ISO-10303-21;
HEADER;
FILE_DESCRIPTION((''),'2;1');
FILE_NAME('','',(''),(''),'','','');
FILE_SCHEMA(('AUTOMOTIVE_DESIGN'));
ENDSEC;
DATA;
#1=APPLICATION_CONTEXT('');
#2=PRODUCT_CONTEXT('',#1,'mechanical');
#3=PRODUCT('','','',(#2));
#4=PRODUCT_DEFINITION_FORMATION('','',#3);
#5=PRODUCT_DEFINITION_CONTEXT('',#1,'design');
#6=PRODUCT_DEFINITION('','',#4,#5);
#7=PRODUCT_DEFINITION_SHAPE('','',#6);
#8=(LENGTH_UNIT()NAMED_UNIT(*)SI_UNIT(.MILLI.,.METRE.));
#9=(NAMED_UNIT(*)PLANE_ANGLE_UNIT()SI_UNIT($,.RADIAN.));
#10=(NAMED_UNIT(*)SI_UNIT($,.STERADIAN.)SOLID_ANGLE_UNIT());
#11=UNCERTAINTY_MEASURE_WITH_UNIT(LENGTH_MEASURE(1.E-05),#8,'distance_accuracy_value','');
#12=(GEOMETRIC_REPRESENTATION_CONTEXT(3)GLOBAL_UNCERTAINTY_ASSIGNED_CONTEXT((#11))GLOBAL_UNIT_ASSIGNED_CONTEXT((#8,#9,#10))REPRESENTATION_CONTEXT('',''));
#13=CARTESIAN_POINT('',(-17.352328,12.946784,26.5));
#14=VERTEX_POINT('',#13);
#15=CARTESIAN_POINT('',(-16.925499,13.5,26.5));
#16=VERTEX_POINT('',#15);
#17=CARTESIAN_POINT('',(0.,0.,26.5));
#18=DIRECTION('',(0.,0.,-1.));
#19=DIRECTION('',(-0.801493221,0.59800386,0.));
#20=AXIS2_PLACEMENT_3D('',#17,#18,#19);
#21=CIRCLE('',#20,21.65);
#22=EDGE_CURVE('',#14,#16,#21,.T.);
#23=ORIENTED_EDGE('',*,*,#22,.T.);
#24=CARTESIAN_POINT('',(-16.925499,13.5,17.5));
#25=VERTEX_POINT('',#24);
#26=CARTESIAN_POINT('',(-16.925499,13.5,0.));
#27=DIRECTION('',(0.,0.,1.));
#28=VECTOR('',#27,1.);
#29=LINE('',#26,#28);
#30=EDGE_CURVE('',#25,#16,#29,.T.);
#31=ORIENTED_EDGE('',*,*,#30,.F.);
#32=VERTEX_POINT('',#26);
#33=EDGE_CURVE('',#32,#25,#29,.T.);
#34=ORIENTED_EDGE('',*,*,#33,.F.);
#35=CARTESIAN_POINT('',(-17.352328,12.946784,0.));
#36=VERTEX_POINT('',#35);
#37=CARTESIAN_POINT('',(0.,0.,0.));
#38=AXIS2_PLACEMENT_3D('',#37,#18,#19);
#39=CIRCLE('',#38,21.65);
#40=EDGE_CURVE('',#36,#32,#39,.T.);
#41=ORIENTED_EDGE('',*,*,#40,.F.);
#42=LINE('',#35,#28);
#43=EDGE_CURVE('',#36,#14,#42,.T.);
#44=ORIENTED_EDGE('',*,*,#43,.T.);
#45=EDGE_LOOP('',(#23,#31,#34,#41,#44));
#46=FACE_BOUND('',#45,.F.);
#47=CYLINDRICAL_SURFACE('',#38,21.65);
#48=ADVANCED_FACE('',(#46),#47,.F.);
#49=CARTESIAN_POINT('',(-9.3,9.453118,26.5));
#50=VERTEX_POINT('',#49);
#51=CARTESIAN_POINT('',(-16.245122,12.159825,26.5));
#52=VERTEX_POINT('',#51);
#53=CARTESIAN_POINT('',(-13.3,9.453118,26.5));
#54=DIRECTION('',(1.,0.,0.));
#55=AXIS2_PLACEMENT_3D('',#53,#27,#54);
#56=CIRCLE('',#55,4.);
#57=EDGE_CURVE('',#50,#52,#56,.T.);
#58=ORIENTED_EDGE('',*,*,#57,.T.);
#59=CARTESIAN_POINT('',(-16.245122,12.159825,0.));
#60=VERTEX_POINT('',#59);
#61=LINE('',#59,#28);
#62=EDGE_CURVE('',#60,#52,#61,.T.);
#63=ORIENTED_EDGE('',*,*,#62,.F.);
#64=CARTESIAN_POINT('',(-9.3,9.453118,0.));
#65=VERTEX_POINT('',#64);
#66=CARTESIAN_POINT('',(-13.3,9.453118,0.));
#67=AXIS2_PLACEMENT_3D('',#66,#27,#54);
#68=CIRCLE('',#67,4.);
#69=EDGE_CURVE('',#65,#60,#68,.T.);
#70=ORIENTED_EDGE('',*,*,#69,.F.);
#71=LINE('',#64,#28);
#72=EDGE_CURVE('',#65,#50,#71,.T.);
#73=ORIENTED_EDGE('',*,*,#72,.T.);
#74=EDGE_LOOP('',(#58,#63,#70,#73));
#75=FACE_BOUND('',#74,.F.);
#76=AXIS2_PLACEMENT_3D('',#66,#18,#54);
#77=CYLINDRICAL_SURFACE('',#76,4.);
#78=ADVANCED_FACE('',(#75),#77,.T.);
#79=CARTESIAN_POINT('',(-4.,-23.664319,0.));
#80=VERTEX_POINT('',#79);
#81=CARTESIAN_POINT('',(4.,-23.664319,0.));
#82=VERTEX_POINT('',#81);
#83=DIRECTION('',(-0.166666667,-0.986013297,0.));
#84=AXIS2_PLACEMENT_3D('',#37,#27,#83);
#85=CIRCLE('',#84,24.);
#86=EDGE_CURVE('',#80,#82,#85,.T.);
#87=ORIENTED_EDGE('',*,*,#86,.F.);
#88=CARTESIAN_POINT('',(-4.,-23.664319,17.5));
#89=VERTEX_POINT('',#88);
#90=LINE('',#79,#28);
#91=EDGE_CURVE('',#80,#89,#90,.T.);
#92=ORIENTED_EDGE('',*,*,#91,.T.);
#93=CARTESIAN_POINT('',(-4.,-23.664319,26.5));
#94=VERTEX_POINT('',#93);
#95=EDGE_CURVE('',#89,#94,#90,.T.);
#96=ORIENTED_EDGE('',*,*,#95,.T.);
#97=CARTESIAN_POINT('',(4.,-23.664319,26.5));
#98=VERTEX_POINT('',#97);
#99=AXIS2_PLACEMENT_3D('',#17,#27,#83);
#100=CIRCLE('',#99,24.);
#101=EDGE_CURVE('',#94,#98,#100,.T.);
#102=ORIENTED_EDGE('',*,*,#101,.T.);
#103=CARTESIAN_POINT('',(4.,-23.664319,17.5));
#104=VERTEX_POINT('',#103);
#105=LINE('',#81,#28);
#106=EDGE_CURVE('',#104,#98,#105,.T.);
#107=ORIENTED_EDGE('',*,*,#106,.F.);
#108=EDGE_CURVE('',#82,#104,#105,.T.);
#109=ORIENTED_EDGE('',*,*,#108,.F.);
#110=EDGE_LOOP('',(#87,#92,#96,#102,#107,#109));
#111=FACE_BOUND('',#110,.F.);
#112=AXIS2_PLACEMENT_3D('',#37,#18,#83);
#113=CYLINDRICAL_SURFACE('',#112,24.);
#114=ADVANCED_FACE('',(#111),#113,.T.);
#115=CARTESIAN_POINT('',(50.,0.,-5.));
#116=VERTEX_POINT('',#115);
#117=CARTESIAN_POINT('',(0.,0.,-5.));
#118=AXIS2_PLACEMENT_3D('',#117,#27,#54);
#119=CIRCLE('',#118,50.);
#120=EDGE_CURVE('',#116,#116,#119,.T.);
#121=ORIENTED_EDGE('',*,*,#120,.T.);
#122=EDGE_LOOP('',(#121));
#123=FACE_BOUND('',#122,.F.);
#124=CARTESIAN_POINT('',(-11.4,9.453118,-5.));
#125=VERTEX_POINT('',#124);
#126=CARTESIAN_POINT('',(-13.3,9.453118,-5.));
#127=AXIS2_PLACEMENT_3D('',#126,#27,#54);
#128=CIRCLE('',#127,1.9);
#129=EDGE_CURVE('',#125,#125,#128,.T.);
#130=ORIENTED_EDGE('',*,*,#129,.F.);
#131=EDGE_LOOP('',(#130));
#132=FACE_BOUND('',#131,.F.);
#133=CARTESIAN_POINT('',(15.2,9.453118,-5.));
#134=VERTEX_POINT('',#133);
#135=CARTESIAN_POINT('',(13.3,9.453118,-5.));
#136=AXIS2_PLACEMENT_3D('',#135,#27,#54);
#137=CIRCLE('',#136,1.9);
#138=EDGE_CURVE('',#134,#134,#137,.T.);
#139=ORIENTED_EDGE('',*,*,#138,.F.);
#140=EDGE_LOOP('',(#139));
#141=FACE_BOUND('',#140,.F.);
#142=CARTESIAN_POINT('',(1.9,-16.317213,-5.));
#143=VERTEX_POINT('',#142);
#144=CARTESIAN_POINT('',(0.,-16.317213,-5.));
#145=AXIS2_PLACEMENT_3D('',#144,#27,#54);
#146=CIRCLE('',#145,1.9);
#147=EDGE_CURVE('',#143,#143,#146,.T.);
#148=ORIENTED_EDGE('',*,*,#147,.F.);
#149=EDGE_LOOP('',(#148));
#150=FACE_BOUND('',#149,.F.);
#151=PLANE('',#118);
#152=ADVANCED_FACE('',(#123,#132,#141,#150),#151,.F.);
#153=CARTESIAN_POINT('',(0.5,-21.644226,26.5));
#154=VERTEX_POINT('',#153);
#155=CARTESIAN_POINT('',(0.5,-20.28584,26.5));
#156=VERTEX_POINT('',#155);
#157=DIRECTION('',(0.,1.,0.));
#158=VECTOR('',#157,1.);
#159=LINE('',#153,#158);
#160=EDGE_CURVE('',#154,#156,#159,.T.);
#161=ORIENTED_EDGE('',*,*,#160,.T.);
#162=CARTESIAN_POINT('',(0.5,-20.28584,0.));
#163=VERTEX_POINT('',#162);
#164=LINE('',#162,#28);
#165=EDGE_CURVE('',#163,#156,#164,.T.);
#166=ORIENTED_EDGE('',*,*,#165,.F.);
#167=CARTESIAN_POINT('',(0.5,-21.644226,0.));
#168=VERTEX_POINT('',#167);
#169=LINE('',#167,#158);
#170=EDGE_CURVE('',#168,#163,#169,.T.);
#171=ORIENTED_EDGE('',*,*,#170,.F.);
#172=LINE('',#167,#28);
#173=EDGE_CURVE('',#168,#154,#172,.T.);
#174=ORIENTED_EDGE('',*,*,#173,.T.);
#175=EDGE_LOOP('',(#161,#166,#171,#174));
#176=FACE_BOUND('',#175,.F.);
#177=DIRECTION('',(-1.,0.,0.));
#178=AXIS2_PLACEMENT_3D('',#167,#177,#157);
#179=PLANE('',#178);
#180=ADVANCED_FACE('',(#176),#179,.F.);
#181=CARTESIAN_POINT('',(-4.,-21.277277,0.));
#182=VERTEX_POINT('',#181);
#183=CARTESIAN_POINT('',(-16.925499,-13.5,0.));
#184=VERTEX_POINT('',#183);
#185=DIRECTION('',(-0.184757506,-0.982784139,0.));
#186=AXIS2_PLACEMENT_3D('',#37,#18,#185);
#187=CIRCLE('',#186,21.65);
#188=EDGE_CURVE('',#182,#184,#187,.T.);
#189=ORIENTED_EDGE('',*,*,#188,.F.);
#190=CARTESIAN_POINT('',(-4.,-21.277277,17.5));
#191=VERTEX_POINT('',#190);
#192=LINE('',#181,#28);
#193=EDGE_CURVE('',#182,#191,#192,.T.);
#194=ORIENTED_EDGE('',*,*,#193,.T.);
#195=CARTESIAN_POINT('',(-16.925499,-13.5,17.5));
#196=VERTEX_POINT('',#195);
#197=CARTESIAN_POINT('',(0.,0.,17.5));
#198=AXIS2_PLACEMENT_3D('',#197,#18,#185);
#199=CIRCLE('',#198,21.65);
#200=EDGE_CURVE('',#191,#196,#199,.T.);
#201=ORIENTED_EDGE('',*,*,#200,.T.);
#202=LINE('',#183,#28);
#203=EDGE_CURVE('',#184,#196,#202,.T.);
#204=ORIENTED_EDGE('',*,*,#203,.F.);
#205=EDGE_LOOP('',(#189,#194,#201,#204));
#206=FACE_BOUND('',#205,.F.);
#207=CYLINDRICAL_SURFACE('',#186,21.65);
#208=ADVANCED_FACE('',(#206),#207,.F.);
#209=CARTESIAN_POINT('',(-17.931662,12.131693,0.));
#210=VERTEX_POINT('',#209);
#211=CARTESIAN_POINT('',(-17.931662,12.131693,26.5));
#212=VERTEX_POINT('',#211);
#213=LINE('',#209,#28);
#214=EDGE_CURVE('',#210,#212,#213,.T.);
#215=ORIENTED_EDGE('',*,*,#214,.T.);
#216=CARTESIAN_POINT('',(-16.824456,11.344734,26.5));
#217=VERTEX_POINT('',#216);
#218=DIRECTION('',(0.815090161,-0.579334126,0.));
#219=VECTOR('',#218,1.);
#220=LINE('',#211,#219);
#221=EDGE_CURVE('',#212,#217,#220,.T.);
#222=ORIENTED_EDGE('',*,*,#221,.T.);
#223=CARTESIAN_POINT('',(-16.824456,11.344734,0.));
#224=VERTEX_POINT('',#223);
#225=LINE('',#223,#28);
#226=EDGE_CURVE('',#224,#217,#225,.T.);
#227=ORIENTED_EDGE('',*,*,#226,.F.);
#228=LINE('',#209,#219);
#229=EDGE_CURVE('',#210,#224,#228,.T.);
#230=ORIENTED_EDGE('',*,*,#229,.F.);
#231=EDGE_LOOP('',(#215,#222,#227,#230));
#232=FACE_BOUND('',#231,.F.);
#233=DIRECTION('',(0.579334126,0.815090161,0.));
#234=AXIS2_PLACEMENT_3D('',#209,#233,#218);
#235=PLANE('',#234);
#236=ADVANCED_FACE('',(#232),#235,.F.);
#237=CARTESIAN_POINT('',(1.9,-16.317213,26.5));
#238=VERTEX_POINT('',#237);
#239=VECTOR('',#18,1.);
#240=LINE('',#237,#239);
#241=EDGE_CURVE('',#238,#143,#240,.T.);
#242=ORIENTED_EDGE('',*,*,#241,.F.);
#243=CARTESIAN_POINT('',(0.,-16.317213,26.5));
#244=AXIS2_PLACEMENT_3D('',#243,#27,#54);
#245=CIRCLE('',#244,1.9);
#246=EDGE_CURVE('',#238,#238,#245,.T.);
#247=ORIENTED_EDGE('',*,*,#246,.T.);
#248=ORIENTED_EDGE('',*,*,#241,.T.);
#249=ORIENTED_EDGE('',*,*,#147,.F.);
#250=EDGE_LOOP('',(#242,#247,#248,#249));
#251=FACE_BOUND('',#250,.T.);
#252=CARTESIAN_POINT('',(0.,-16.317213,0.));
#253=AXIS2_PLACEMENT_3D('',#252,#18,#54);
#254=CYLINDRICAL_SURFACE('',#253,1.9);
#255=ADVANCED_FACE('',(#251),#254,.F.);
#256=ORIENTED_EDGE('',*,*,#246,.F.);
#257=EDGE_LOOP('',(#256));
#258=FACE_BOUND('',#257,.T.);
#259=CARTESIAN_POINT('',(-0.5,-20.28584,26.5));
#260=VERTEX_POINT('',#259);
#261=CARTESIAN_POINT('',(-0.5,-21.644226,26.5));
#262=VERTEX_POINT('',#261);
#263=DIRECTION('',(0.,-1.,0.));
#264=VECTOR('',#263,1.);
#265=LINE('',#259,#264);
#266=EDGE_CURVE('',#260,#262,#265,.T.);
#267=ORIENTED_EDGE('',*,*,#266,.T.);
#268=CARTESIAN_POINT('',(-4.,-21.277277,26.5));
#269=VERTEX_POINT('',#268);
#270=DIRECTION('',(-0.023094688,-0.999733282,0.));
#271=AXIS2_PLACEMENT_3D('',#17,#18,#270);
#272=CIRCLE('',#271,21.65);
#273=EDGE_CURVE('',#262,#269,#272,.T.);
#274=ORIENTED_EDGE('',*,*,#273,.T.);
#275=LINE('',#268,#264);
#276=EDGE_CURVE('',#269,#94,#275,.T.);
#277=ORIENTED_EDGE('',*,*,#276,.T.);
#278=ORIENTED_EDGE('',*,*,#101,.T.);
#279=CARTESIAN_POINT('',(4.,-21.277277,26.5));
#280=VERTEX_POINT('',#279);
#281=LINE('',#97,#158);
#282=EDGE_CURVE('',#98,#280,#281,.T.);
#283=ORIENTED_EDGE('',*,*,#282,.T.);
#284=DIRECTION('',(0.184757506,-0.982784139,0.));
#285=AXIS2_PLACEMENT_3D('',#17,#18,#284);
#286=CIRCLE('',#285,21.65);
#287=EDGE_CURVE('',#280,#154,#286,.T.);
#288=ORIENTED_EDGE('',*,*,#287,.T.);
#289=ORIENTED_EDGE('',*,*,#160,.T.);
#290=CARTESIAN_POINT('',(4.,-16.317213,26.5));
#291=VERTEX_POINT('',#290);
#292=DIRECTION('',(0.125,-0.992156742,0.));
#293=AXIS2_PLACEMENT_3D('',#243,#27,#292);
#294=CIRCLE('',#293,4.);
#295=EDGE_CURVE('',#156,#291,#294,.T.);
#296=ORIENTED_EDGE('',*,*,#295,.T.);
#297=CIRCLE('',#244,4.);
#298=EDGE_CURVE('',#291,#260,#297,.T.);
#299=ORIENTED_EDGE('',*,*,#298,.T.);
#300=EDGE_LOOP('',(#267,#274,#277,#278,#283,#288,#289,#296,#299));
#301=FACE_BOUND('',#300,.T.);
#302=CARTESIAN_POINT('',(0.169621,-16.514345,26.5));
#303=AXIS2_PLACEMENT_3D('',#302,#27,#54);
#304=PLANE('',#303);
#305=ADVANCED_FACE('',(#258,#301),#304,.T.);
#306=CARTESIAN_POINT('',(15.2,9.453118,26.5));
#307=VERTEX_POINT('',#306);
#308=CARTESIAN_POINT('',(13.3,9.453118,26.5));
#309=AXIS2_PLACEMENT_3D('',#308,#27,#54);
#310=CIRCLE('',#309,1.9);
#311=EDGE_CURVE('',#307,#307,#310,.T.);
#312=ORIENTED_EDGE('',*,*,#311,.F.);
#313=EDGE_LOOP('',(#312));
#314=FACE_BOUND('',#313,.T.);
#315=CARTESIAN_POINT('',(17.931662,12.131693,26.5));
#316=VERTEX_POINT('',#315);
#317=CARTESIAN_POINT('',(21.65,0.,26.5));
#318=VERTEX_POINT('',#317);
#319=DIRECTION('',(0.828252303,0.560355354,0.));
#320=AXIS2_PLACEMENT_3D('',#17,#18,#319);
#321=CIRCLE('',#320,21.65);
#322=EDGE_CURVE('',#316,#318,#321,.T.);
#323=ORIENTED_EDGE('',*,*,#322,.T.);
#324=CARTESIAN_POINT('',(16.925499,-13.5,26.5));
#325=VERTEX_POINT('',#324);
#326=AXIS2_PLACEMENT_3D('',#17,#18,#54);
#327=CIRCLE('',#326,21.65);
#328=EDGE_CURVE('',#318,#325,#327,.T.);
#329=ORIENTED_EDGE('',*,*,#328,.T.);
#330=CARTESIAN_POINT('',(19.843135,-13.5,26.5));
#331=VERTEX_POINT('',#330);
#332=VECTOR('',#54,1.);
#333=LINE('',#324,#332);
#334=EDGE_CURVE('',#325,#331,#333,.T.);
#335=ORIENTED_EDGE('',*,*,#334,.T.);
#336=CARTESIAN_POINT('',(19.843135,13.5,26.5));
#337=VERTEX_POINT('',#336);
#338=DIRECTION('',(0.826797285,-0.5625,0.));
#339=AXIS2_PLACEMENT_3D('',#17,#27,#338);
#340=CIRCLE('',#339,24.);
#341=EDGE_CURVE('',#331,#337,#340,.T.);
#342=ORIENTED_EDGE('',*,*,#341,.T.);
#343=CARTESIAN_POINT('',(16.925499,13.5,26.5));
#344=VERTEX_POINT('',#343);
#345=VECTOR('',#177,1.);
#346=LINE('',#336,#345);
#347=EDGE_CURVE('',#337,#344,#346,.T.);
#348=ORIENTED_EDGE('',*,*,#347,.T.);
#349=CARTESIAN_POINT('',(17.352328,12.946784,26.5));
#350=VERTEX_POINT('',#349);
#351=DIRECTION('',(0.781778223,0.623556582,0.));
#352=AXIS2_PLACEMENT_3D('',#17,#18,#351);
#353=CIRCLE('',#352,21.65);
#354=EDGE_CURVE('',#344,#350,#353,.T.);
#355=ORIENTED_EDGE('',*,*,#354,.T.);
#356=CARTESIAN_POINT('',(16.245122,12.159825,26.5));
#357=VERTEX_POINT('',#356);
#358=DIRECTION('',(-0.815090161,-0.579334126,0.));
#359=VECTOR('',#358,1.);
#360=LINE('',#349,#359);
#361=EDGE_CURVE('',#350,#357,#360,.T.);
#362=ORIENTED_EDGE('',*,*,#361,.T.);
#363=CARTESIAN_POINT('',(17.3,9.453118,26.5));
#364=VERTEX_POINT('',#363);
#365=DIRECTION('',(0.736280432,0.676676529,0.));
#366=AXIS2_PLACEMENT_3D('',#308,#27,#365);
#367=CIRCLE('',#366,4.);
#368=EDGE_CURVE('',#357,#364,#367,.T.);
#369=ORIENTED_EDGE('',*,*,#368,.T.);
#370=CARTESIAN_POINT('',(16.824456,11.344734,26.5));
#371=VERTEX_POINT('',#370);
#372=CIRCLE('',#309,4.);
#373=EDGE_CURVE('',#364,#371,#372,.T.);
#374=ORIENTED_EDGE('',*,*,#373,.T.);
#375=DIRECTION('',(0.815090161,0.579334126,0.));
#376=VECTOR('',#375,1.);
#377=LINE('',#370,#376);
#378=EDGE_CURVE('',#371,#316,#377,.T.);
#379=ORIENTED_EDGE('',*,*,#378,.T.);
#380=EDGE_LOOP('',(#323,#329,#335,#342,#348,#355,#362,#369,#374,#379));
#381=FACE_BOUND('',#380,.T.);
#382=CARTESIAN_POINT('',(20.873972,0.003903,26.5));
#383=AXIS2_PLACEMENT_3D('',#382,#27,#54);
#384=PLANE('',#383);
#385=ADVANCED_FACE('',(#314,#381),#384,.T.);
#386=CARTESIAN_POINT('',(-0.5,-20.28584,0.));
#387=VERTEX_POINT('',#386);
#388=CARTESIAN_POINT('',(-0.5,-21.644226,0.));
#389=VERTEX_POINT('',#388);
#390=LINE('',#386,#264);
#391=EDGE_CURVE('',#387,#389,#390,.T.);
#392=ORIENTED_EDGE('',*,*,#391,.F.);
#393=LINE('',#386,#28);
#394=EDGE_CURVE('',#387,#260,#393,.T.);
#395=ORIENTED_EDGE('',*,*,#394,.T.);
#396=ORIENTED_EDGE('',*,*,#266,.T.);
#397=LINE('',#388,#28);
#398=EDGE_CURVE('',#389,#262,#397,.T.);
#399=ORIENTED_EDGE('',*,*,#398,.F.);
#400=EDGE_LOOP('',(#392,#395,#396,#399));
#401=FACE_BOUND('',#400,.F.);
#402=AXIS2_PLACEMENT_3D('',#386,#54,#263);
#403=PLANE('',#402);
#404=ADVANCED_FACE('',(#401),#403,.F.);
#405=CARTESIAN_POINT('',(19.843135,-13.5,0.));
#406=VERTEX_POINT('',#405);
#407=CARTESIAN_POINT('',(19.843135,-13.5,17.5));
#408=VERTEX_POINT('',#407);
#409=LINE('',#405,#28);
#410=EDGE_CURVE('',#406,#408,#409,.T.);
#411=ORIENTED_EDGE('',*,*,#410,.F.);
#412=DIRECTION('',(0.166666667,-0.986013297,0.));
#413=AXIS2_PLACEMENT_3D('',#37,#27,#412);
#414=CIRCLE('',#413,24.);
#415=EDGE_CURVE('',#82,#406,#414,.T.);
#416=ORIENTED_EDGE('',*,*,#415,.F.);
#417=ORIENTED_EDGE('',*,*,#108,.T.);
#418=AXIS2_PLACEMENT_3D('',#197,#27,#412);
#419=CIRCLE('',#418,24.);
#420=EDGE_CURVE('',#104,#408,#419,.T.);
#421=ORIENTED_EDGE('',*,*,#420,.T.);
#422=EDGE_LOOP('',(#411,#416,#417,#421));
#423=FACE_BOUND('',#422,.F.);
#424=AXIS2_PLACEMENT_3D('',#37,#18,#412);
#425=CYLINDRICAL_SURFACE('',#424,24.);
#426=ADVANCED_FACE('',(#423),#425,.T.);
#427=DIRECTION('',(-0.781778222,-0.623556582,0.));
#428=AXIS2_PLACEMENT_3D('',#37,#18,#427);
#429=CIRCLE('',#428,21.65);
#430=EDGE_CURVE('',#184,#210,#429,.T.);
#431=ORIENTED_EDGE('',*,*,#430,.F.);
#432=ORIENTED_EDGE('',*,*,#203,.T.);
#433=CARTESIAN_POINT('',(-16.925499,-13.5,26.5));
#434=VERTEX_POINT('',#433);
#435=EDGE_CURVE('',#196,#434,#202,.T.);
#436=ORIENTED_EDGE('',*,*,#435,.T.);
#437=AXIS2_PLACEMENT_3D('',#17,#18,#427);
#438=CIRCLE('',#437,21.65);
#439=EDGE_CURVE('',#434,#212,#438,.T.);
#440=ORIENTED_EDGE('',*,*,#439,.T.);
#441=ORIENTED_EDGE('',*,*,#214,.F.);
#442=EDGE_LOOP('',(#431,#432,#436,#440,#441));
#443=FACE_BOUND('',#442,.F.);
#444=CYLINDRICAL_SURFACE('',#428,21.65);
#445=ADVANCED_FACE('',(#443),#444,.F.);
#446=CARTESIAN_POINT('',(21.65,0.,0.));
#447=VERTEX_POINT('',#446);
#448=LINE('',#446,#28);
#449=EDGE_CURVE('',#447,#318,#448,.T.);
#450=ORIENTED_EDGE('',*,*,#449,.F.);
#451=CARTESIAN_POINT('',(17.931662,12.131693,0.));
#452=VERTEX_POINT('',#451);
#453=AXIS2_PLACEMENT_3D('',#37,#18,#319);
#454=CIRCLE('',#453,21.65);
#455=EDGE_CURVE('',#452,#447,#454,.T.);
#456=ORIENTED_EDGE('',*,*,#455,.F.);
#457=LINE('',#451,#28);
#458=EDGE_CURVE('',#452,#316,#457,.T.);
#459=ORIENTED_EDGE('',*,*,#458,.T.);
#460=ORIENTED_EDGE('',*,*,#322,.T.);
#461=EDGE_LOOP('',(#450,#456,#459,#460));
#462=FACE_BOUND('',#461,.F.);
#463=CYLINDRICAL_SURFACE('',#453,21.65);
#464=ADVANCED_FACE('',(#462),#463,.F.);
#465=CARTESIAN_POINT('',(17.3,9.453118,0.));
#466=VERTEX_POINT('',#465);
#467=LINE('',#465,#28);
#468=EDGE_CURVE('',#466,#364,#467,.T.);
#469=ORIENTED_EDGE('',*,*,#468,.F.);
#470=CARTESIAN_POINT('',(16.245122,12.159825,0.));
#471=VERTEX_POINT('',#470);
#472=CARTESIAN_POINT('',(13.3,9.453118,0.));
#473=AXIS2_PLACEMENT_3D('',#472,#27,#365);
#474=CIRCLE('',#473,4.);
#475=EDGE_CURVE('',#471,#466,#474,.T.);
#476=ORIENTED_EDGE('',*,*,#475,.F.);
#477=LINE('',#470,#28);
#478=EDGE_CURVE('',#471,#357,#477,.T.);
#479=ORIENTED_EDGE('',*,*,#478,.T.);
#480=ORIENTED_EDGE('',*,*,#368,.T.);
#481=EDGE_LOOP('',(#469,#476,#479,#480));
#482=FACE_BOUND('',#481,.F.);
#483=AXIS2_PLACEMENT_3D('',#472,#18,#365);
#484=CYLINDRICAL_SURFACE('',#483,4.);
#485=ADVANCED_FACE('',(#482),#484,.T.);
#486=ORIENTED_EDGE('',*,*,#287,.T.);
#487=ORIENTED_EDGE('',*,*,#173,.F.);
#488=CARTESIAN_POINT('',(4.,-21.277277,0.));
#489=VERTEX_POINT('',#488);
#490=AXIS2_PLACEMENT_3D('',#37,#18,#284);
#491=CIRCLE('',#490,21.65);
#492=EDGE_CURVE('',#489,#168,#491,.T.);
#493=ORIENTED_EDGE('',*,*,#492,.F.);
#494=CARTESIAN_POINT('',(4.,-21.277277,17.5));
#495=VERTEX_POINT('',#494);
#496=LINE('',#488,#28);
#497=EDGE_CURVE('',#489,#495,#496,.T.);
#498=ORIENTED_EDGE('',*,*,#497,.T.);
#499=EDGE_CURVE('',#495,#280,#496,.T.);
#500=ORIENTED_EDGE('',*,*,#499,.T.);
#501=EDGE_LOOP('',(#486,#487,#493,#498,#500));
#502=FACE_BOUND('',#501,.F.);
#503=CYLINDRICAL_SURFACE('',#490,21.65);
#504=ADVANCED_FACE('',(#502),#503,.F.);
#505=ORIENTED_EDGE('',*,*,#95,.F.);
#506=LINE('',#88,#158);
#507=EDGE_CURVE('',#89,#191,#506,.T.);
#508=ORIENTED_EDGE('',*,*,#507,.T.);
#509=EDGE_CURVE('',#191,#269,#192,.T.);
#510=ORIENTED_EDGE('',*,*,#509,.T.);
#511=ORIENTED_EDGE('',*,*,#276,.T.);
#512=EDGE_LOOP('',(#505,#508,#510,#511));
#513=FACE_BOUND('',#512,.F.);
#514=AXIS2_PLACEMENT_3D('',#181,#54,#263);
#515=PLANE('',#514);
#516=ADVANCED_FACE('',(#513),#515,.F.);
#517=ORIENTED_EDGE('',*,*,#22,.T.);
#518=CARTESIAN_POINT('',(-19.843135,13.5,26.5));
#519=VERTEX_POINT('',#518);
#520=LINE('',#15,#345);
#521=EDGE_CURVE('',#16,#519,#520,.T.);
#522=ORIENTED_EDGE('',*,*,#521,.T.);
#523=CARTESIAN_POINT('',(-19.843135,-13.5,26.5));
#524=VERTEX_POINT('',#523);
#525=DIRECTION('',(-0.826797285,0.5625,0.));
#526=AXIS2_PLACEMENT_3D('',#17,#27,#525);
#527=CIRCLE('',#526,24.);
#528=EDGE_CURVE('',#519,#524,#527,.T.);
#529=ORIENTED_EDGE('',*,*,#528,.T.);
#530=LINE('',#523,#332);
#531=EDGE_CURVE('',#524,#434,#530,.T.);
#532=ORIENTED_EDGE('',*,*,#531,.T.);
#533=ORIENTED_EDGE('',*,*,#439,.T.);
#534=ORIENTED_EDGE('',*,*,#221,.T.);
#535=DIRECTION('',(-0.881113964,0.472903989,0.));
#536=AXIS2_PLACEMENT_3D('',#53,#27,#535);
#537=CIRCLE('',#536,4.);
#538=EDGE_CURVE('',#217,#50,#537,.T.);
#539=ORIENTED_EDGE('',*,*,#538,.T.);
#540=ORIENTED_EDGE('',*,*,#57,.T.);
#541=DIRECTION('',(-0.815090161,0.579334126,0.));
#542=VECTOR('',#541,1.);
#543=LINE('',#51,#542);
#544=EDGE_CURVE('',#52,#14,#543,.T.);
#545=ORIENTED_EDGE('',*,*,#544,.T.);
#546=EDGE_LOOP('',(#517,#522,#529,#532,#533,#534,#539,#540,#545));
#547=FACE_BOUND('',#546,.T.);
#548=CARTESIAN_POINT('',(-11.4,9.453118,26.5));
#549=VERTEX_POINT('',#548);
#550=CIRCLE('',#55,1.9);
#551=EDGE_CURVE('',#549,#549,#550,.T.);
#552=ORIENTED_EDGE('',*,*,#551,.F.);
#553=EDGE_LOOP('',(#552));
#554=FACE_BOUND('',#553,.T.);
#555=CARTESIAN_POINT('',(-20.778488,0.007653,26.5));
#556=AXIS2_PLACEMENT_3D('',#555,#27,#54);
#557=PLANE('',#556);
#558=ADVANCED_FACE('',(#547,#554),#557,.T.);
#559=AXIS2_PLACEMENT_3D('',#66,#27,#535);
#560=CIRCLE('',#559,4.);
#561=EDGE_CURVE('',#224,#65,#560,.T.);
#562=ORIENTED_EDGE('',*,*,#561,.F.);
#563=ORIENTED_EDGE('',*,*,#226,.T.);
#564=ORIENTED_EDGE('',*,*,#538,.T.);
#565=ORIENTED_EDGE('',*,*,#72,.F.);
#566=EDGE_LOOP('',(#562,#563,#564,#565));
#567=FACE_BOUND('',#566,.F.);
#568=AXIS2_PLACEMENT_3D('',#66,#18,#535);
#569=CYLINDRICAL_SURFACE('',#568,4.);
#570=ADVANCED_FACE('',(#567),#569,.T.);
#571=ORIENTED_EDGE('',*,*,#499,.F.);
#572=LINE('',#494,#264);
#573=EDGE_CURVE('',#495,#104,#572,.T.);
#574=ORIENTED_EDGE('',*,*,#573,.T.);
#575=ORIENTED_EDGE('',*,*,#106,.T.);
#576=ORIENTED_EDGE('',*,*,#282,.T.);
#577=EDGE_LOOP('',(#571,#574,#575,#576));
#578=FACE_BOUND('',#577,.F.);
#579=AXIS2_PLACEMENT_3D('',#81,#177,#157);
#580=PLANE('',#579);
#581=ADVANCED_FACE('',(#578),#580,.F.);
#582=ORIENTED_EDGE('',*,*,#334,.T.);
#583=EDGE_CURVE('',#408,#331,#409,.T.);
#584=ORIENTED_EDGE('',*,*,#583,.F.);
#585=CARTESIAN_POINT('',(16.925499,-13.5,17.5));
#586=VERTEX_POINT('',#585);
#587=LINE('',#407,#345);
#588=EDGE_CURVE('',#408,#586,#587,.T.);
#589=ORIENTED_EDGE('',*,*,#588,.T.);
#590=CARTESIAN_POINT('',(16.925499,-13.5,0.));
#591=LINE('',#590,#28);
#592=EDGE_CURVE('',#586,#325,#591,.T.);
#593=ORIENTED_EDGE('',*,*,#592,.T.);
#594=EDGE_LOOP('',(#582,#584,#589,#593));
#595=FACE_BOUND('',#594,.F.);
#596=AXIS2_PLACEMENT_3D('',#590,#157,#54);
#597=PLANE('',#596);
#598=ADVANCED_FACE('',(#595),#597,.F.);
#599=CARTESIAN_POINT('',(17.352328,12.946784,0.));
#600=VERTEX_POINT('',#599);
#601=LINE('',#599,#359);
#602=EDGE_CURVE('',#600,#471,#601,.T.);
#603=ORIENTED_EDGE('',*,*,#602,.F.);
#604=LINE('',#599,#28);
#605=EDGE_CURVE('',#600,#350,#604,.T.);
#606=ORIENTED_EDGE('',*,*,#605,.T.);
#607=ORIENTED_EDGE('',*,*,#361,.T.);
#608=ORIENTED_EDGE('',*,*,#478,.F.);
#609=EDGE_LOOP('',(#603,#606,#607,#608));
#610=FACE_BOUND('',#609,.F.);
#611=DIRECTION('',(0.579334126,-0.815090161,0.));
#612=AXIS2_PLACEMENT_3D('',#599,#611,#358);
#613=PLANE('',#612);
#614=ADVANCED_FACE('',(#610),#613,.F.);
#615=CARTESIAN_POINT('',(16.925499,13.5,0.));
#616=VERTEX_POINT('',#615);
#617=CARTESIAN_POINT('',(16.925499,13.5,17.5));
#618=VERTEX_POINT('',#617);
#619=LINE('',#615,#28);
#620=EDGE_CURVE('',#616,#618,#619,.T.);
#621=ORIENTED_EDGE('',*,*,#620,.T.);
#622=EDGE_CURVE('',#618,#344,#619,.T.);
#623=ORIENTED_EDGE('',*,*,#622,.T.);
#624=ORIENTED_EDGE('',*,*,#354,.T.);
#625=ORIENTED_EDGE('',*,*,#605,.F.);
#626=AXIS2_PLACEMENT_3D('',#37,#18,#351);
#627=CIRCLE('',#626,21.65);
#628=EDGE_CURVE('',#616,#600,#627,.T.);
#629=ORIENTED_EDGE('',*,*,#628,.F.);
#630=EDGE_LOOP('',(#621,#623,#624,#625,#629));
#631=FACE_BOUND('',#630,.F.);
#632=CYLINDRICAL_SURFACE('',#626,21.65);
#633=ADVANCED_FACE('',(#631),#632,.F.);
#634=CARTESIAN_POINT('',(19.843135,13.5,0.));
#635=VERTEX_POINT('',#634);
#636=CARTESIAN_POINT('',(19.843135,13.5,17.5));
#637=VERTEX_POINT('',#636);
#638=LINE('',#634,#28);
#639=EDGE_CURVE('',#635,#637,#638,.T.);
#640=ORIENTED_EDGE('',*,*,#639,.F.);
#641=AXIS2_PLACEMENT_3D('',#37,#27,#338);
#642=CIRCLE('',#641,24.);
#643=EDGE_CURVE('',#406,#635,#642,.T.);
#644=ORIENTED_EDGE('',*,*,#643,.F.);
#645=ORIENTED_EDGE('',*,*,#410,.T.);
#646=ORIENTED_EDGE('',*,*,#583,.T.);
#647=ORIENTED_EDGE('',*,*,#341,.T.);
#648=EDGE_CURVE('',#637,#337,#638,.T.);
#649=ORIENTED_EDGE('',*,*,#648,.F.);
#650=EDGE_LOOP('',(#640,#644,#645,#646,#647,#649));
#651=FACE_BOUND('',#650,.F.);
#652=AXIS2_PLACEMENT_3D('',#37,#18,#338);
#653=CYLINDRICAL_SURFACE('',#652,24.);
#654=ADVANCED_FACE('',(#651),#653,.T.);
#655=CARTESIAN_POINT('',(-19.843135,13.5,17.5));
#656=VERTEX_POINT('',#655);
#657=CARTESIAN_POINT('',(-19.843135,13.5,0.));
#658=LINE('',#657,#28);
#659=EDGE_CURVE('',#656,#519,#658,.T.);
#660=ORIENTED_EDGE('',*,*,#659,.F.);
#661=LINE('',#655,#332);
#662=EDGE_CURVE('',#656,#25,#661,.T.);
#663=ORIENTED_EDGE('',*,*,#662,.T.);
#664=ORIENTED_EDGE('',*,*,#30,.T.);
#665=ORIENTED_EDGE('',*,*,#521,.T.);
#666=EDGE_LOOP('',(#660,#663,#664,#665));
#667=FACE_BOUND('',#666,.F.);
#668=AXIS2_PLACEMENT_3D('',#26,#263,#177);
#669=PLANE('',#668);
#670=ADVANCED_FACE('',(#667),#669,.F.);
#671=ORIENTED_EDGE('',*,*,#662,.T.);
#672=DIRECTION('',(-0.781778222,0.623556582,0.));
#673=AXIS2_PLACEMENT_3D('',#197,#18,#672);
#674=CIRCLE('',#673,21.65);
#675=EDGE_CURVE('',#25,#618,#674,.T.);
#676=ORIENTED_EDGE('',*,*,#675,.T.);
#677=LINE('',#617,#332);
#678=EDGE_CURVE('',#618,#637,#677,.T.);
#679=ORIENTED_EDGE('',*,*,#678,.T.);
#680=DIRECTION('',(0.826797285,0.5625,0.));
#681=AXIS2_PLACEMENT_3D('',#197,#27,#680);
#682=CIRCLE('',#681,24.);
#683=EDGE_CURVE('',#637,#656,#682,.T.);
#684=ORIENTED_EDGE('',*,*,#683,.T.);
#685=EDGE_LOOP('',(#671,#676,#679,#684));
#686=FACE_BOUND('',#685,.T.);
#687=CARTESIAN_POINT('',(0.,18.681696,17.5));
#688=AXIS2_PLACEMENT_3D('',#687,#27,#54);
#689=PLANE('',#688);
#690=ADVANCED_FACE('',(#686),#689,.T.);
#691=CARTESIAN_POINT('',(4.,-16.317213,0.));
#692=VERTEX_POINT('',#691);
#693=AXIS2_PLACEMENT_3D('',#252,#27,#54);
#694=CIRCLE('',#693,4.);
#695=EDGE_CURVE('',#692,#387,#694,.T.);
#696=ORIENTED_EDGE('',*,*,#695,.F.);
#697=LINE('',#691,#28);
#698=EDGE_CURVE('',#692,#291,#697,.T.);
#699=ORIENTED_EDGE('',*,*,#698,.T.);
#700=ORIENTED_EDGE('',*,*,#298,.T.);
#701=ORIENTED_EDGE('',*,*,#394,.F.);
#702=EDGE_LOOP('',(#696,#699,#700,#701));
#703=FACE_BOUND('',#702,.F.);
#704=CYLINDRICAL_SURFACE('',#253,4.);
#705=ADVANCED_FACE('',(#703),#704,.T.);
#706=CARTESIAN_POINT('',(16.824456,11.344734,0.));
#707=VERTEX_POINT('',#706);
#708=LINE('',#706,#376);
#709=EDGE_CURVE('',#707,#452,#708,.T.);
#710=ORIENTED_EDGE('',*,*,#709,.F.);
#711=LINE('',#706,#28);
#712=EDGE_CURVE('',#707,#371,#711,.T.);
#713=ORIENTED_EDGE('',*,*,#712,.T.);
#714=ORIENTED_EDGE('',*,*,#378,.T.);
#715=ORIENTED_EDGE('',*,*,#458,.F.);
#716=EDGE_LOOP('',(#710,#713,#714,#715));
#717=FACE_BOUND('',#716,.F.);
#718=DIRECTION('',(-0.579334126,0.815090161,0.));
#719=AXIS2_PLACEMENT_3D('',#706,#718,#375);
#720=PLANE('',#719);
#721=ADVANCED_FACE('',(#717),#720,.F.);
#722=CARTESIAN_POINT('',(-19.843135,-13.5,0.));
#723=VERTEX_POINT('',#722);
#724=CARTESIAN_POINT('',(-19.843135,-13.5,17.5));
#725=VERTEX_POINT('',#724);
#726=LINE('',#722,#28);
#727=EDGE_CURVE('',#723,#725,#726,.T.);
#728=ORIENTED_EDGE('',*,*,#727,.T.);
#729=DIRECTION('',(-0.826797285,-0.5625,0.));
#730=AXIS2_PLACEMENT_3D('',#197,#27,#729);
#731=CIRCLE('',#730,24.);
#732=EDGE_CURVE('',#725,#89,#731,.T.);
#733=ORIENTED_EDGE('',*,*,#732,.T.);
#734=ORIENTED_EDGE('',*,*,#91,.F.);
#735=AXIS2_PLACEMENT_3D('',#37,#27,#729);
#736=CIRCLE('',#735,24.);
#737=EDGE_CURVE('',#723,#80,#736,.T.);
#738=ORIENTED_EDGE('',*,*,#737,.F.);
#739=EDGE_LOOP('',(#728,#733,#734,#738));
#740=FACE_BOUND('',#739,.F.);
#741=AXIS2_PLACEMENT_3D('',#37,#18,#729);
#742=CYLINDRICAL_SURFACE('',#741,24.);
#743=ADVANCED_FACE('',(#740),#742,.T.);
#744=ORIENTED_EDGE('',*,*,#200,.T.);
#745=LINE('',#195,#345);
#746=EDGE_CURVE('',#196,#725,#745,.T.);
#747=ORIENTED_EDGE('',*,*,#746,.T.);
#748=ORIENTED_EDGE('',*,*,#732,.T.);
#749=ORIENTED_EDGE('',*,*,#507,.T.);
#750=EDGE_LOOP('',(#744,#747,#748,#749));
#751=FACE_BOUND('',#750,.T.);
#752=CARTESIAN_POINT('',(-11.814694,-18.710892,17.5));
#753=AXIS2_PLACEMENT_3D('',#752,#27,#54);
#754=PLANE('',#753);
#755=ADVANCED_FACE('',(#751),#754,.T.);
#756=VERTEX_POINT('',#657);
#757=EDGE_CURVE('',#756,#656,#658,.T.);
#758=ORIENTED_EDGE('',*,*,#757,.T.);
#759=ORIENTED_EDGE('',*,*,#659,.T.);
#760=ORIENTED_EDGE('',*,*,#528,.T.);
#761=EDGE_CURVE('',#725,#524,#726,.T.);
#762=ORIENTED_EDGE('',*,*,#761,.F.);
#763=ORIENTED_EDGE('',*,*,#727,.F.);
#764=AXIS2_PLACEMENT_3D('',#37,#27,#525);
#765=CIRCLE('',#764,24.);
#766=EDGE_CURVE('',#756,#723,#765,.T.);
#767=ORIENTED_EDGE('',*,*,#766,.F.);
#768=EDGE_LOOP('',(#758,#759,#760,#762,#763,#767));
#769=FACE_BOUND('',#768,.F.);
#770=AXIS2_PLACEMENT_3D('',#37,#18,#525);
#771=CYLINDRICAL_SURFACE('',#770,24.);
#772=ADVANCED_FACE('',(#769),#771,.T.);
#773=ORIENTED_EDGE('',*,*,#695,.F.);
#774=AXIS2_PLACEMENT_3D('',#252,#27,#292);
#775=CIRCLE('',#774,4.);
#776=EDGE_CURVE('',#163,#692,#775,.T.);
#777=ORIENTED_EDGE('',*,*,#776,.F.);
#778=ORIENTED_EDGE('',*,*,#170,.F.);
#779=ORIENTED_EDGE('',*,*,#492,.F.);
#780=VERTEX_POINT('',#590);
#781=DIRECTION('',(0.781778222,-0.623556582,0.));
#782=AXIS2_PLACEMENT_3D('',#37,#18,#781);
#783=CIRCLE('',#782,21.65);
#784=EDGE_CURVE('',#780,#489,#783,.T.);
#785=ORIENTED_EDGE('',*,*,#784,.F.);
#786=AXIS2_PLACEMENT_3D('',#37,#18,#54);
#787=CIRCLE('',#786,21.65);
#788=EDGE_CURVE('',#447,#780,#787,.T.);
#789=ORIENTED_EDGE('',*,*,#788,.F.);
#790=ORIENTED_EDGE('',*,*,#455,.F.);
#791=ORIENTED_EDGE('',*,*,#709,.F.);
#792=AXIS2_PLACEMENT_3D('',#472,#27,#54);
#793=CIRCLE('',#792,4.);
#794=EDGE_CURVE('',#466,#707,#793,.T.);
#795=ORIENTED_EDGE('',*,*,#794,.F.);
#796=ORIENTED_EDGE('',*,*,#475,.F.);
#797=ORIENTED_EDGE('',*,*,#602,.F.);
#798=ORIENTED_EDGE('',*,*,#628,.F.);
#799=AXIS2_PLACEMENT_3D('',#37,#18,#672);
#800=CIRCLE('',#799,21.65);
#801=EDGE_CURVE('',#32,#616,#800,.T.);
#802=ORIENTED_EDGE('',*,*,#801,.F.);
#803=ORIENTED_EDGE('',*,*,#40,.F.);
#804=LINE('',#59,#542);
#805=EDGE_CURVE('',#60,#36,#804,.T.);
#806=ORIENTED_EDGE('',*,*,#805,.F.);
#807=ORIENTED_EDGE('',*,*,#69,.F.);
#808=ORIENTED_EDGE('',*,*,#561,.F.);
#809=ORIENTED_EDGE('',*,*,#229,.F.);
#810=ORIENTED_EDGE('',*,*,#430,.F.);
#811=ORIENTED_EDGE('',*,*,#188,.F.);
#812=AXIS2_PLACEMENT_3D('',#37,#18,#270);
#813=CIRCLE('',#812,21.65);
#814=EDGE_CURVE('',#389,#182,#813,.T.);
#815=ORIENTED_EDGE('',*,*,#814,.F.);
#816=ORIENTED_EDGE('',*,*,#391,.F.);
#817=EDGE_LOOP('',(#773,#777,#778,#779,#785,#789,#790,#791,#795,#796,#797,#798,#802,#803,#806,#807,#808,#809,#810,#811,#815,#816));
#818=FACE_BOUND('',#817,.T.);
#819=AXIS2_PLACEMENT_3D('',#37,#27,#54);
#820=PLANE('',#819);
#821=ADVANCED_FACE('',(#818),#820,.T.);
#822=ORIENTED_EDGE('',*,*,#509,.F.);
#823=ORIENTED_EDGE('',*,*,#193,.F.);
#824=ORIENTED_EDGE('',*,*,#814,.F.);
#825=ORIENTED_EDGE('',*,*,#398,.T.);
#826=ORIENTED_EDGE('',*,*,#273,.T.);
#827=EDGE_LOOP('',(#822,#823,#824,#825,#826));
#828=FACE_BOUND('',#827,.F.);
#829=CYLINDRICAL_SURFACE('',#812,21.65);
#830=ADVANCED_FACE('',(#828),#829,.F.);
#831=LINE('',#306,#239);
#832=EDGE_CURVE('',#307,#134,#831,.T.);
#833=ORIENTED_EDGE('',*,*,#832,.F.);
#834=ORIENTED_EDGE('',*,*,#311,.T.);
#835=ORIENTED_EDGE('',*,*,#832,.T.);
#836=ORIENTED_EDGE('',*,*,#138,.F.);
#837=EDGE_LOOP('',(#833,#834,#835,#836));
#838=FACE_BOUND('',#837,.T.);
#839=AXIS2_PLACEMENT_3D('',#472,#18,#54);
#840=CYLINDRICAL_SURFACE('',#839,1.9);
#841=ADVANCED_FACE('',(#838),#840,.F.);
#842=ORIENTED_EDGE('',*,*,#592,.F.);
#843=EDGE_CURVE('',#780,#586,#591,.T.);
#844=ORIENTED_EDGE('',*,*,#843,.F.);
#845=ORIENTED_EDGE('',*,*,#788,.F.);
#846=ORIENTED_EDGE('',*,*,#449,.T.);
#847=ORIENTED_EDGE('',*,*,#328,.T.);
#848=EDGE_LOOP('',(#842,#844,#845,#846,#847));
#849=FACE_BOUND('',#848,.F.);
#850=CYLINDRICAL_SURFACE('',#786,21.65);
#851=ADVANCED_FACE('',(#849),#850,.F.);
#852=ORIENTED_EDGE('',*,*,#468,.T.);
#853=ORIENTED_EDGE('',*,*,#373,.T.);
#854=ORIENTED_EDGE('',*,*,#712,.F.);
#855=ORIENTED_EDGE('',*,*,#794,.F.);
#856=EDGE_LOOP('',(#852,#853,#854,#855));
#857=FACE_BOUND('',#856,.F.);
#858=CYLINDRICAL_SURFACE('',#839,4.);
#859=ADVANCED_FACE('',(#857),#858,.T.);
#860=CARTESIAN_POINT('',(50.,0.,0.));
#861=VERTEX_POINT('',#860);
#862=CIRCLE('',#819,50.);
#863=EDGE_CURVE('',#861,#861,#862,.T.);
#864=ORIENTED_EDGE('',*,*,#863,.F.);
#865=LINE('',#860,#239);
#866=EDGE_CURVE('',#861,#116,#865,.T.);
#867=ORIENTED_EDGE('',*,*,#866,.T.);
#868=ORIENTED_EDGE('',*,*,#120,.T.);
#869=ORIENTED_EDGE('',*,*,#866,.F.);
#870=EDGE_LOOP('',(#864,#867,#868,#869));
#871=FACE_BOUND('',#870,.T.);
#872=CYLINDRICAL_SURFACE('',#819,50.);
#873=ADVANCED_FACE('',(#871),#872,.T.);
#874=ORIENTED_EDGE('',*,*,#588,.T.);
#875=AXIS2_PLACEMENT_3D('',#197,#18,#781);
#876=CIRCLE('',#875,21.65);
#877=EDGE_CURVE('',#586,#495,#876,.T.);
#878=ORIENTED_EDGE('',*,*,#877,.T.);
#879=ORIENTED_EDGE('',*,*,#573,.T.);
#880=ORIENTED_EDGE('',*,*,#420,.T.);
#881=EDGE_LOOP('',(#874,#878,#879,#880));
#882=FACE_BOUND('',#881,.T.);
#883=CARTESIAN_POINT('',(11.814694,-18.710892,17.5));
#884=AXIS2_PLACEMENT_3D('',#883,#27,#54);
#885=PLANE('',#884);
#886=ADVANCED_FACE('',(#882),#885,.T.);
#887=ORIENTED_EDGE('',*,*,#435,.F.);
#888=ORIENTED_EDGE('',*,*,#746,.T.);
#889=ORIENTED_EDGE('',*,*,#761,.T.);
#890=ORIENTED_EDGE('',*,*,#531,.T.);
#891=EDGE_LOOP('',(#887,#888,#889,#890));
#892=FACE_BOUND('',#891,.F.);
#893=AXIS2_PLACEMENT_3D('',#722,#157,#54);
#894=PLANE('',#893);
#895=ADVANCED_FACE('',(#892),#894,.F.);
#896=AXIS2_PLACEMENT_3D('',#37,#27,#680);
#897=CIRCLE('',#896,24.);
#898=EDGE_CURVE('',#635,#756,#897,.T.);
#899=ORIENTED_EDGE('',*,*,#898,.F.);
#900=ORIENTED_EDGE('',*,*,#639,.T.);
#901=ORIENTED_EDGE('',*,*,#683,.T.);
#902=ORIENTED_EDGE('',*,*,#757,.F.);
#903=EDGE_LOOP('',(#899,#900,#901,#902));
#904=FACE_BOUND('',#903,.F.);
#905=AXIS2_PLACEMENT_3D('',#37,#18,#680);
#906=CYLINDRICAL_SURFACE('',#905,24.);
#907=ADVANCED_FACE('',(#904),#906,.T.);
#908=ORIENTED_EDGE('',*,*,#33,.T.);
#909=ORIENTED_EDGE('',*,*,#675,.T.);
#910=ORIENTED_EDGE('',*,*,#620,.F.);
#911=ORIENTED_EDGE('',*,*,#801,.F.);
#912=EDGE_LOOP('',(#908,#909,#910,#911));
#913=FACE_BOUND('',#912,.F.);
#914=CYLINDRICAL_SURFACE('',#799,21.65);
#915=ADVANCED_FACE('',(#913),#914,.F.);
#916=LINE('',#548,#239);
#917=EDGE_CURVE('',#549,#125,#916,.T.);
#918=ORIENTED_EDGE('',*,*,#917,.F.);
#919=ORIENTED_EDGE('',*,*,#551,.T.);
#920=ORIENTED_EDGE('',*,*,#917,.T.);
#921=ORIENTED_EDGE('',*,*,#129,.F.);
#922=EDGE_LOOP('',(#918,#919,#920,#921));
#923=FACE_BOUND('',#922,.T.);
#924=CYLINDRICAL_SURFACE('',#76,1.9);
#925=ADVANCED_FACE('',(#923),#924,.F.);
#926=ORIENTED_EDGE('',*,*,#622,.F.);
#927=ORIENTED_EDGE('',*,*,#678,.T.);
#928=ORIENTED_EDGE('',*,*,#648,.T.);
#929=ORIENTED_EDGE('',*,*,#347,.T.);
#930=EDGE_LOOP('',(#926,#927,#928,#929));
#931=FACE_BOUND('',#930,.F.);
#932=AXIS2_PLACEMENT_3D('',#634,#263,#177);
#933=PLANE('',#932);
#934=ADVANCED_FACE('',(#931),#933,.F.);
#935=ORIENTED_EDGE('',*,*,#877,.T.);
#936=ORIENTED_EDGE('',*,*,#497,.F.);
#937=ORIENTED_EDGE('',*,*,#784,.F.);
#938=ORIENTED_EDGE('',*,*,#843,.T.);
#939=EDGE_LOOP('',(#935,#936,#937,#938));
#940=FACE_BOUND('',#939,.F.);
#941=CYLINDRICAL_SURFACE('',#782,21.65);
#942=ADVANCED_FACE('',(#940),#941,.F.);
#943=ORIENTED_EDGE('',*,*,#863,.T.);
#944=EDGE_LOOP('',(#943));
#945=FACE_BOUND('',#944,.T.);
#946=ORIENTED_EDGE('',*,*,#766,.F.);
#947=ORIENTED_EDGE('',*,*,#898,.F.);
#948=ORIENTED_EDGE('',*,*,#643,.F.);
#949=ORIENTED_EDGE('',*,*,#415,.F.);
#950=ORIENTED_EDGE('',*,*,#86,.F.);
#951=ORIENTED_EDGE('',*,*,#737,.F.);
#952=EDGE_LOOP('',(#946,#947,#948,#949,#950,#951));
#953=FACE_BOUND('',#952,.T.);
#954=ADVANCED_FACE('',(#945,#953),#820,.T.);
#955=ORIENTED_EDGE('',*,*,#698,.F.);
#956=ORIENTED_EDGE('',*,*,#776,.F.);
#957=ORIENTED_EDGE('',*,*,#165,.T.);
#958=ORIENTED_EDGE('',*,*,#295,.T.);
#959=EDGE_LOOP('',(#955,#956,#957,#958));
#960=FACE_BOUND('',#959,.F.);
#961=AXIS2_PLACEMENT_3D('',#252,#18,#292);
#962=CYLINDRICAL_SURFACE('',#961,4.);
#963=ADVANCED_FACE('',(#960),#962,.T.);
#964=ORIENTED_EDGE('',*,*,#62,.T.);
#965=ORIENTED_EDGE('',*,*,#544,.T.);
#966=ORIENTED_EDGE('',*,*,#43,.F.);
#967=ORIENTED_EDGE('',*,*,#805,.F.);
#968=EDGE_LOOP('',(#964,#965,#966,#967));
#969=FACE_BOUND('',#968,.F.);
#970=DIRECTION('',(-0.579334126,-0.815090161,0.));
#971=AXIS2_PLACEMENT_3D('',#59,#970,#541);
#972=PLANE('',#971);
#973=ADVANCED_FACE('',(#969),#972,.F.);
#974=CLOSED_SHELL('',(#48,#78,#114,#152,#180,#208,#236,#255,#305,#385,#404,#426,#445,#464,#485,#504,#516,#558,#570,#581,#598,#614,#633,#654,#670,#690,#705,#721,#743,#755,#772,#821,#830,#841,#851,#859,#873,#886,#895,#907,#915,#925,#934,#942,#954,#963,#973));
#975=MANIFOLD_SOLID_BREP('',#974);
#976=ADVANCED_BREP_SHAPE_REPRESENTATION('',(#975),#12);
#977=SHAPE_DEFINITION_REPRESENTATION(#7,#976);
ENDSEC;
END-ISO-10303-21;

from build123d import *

# Parameters (mm, degrees)
F0_R     = 50
F0_R_2   = 1.9
F1_DEPTH = 5
F2_DEPTH = 17.5
F3_DEPTH = 26.5


# Not quite as in the source:
# - a feature names something its author has since deleted; it is built from what else it names


with BuildPart() as f1:
    # F0 (on Top) → F1 (new body)
    with BuildSketch(Plane.XY):
        Circle(F0_R)
        with BuildLine():
            ThreePointArc((19.843134833, 13.5), (22.9372539332, 7.0627460668), (24, 0))
            ThreePointArc((24, 0), (22.9372539332, -7.0627460668), (19.843134833, -13.5))
            ThreePointArc((19.843134833, -13.5), (12.9596340813, -20.2001951594), (4, -23.6643191324))
            ThreePointArc((4, -23.6643191324), (0, -24), (-4, -23.6643191324))
            ThreePointArc((-4, -23.6643191324), (-12.9596340813, -20.2001951594), (-19.843134833, -13.5))
            ThreePointArc((-19.843134833, -13.5), (-24, 0), (-19.843134833, 13.5))
            ThreePointArc((-19.843134833, 13.5), (0, 24), (19.843134833, 13.5))
        make_face(mode=Mode.SUBTRACT)
        with BuildLine():
            ThreePointArc((4, -23.6643191324), (12.9596340813, -20.2001951594), (19.843134833, -13.5))
            Line((19.843134833, -13.5), (16.9254985156, -13.5))
            ThreePointArc((16.9254985156, -13.5), (11.1620172865, -18.5507916299), (4, -21.2772766114))
            Line((4, -21.2772766114), (4, -23.6643191324))
        make_face()
        with BuildLine():
            ThreePointArc((19.843134833, -13.5), (22.9372539332, -7.0627460668), (24, 0))
            ThreePointArc((24, 0), (22.9372539332, 7.0627460668), (19.843134833, 13.5))
            Line((19.843134833, 13.5), (16.9254985156, 13.5))
            ThreePointArc((16.9254985156, 13.5), (17.1411453437, 13.2251138485), (17.3523282296, 12.9467835778))
            ThreePointArc((17.3523282296, 12.9467835778), (17.6467019836, 12.5425838288), (17.9316623557, 12.1316934169))
            ThreePointArc((17.9316623557, 12.1316934169), (20.6995530145, 6.3443679748), (21.65, 0))
            ThreePointArc((21.65, 0), (20.4347686904, -7.1514144453), (16.9254985156, -13.5))
            Line((16.9254985156, -13.5), (19.843134833, -13.5))
        make_face()
        with BuildLine():
            ThreePointArc((17.3523282296, 12.9467835778), (17.1411453437, 13.2251138485), (16.9254985156, 13.5))
            ThreePointArc((16.9254985156, 13.5), (0, 21.65), (-16.9254985156, 13.5))
            ThreePointArc((-16.9254985156, 13.5), (-17.1411453437, 13.2251138485), (-17.3523282296, 12.9467835778))
            Line((-17.3523282296, 12.9467835778), (-16.2451217298, 12.1598246122))
            ThreePointArc((-16.2451217298, 12.1598246122), (-11.8474999, 13.1800801892), (-9.3, 9.4531184965))
            ThreePointArc((-9.3, 9.4531184965), (-14.2752375549, 5.5738258146), (-16.8244558558, 11.3447344513))
            Line((-16.8244558558, 11.3447344513), (-17.9316623557, 12.1316934169))
            ThreePointArc((-17.9316623557, 12.1316934169), (-21.6333386895, -0.8492097177), (-16.9254985156, -13.5))
            ThreePointArc((-16.9254985156, -13.5), (-11.1620172865, -18.5507916299), (-4, -21.2772766114))
            ThreePointArc((-4, -21.2772766114), (-2.2574682461, -21.5319840497), (-0.5, -21.6442255579))
            Line((-0.5, -21.6442255579), (-0.5, -20.2858402491))
            ThreePointArc((-0.5, -20.2858402491), (-2.6457513111, -13.3172132825), (4, -16.3172132825))
            ThreePointArc((4, -16.3172132825), (3, -18.9629645936), (0.5, -20.2858402491))
            Line((0.5, -20.2858402491), (0.5, -21.6442255579))
            ThreePointArc((0.5, -21.6442255579), (2.2574682461, -21.5319840497), (4, -21.2772766114))
            ThreePointArc((4, -21.2772766114), (11.1620172865, -18.5507916299), (16.9254985156, -13.5))
            ThreePointArc((16.9254985156, -13.5), (20.4347686904, -7.1514144453), (21.65, 0))
            ThreePointArc((21.65, 0), (20.6995530145, 6.3443679748), (17.9316623557, 12.1316934169))
            Line((17.9316623557, 12.1316934169), (16.8244558558, 11.3447344513))
            ThreePointArc((16.8244558558, 11.3447344513), (17.1792926819, 10.4283560513), (17.3, 9.4531184965))
            ThreePointArc((17.3, 9.4531184965), (9.5730383072, 8.0006183965), (16.2451217298, 12.1598246122))
            Line((16.2451217298, 12.1598246122), (17.3523282296, 12.9467835778))
        make_face()
        with BuildLine():
            Line((16.9254985156, 13.5), (19.843134833, 13.5))
            ThreePointArc((19.843134833, 13.5), (0, 24), (-19.843134833, 13.5))
            Line((-19.843134833, 13.5), (-16.9254985156, 13.5))
            ThreePointArc((-16.9254985156, 13.5), (0, 21.65), (16.9254985156, 13.5))
        make_face()
        with BuildLine():
            ThreePointArc((-9.3, 9.4531184965), (-11.8474999, 13.1800801892), (-16.2451217298, 12.1598246122))
            ThreePointArc((-16.2451217298, 12.1598246122), (-16.5603606436, 11.7704550006), (-16.8244558558, 11.3447344513))
            ThreePointArc((-16.8244558558, 11.3447344513), (-14.2752375549, 5.5738258146), (-9.3, 9.4531184965))
        make_face()
        with Locations((-13.3, 9.4531184965)):
            Circle(F0_R_2, mode=Mode.SUBTRACT)
        with BuildLine():
            ThreePointArc((16.8244558558, 11.3447344513), (16.5603606436, 11.7704550006), (16.2451217298, 12.1598246122))
            ThreePointArc((16.2451217298, 12.1598246122), (9.5730383072, 8.0006183965), (17.3, 9.4531184965))
            ThreePointArc((17.3, 9.4531184965), (17.1792926819, 10.4283560513), (16.8244558558, 11.3447344513))
        make_face()
        with Locations((13.3, 9.4531184965)):
            Circle(F0_R_2, mode=Mode.SUBTRACT)
        with BuildLine():
            Line((-16.9254985156, 13.5), (-19.843134833, 13.5))
            ThreePointArc((-19.843134833, 13.5), (-24, 0), (-19.843134833, -13.5))
            Line((-19.843134833, -13.5), (-16.9254985156, -13.5))
            ThreePointArc((-16.9254985156, -13.5), (-21.6333386895, -0.8492097177), (-17.9316623557, 12.1316934169))
            ThreePointArc((-17.9316623557, 12.1316934169), (-17.6467019836, 12.5425838288), (-17.3523282296, 12.9467835778))
            ThreePointArc((-17.3523282296, 12.9467835778), (-17.1411453437, 13.2251138485), (-16.9254985156, 13.5))
        make_face()
        with BuildLine():
            Line((-16.9254985156, -13.5), (-19.843134833, -13.5))
            ThreePointArc((-19.843134833, -13.5), (-12.9596340813, -20.2001951594), (-4, -23.6643191324))
            Line((-4, -23.6643191324), (-4, -21.2772766114))
            ThreePointArc((-4, -21.2772766114), (-11.1620172865, -18.5507916299), (-16.9254985156, -13.5))
        make_face()
        with BuildLine():
            ThreePointArc((-4, -23.6643191324), (0, -24), (4, -23.6643191324))
            Line((4, -23.6643191324), (4, -21.2772766114))
            ThreePointArc((4, -21.2772766114), (2.2574682461, -21.5319840497), (0.5, -21.6442255579))
            ThreePointArc((0.5, -21.6442255579), (0, -21.65), (-0.5, -21.6442255579))
            ThreePointArc((-0.5, -21.6442255579), (-2.2574682461, -21.5319840497), (-4, -21.2772766114))
            Line((-4, -21.2772766114), (-4, -23.6643191324))
        make_face()
        with BuildLine():
            ThreePointArc((-0.5, -20.2858402491), (0, -20.3172132825), (0.5, -20.2858402491))
            ThreePointArc((0.5, -20.2858402491), (3, -18.9629645936), (4, -16.3172132825))
            ThreePointArc((4, -16.3172132825), (-2.6457513111, -13.3172132825), (-0.5, -20.2858402491))
        make_face()
        with Locations((0, -16.3172132825)):
            Circle(F0_R_2, mode=Mode.SUBTRACT)
        with BuildLine():
            ThreePointArc((-0.5, -21.6442255579), (0, -21.65), (0.5, -21.6442255579))
            Line((0.5, -21.6442255579), (0.5, -20.2858402491))
            ThreePointArc((0.5, -20.2858402491), (0, -20.3172132825), (-0.5, -20.2858402491))
            Line((-0.5, -20.2858402491), (-0.5, -21.6442255579))
        make_face()
        with BuildLine():
            ThreePointArc((17.9316623557, 12.1316934169), (17.6467019836, 12.5425838288), (17.3523282296, 12.9467835778))
            Line((17.3523282296, 12.9467835778), (16.2451217298, 12.1598246122))
            ThreePointArc((16.2451217298, 12.1598246122), (16.5603606436, 11.7704550006), (16.8244558558, 11.3447344513))
            Line((16.8244558558, 11.3447344513), (17.9316623557, 12.1316934169))
        make_face()
        with BuildLine():
            Line((-16.2451217298, 12.1598246122), (-17.3523282296, 12.9467835778))
            ThreePointArc((-17.3523282296, 12.9467835778), (-17.6467019836, 12.5425838288), (-17.9316623557, 12.1316934169))
            Line((-17.9316623557, 12.1316934169), (-16.8244558558, 11.3447344513))
            ThreePointArc((-16.8244558558, 11.3447344513), (-16.5603606436, 11.7704550006), (-16.2451217298, 12.1598246122))
        make_face()
    extrude(amount=-F1_DEPTH)

    # F0 (on Top) → F2 (join)
    with BuildSketch(Plane.XY):
        with BuildLine():
            ThreePointArc((4, -23.6643191324), (12.9596340813, -20.2001951594), (19.843134833, -13.5))
            Line((19.843134833, -13.5), (16.9254985156, -13.5))
            ThreePointArc((16.9254985156, -13.5), (11.1620172865, -18.5507916299), (4, -21.2772766114))
            Line((4, -21.2772766114), (4, -23.6643191324))
        make_face()
        with BuildLine():
            Line((-16.9254985156, -13.5), (-19.843134833, -13.5))
            ThreePointArc((-19.843134833, -13.5), (-12.9596340813, -20.2001951594), (-4, -23.6643191324))
            Line((-4, -23.6643191324), (-4, -21.2772766114))
            ThreePointArc((-4, -21.2772766114), (-11.1620172865, -18.5507916299), (-16.9254985156, -13.5))
        make_face()
        with BuildLine():
            Line((16.9254985156, 13.5), (19.843134833, 13.5))
            ThreePointArc((19.843134833, 13.5), (0, 24), (-19.843134833, 13.5))
            Line((-19.843134833, 13.5), (-16.9254985156, 13.5))
            ThreePointArc((-16.9254985156, 13.5), (0, 21.65), (16.9254985156, 13.5))
        make_face()
    extrude(amount=F2_DEPTH)

    # F0 (on Top) → F3 (join)
    with BuildSketch(Plane.XY):
        with BuildLine():
            Line((-16.9254985156, 13.5), (-19.843134833, 13.5))
            ThreePointArc((-19.843134833, 13.5), (-24, 0), (-19.843134833, -13.5))
            Line((-19.843134833, -13.5), (-16.9254985156, -13.5))
            ThreePointArc((-16.9254985156, -13.5), (-21.6333386895, -0.8492097177), (-17.9316623557, 12.1316934169))
            ThreePointArc((-17.9316623557, 12.1316934169), (-17.6467019836, 12.5425838288), (-17.3523282296, 12.9467835778))
            ThreePointArc((-17.3523282296, 12.9467835778), (-17.1411453437, 13.2251138485), (-16.9254985156, 13.5))
        make_face()
        with BuildLine():
            ThreePointArc((19.843134833, -13.5), (22.9372539332, -7.0627460668), (24, 0))
            ThreePointArc((24, 0), (22.9372539332, 7.0627460668), (19.843134833, 13.5))
            Line((19.843134833, 13.5), (16.9254985156, 13.5))
            ThreePointArc((16.9254985156, 13.5), (17.1411453437, 13.2251138485), (17.3523282296, 12.9467835778))
            ThreePointArc((17.3523282296, 12.9467835778), (17.6467019836, 12.5425838288), (17.9316623557, 12.1316934169))
            ThreePointArc((17.9316623557, 12.1316934169), (20.6995530145, 6.3443679748), (21.65, 0))
            ThreePointArc((21.65, 0), (20.4347686904, -7.1514144453), (16.9254985156, -13.5))
            Line((16.9254985156, -13.5), (19.843134833, -13.5))
        make_face()
        with BuildLine():
            ThreePointArc((16.8244558558, 11.3447344513), (16.5603606436, 11.7704550006), (16.2451217298, 12.1598246122))
            ThreePointArc((16.2451217298, 12.1598246122), (9.5730383072, 8.0006183965), (17.3, 9.4531184965))
            ThreePointArc((17.3, 9.4531184965), (17.1792926819, 10.4283560513), (16.8244558558, 11.3447344513))
        make_face()
        with Locations((13.3, 9.4531184965)):
            Circle(F0_R_2, mode=Mode.SUBTRACT)
        with BuildLine():
            ThreePointArc((-0.5, -20.2858402491), (0, -20.3172132825), (0.5, -20.2858402491))
            ThreePointArc((0.5, -20.2858402491), (3, -18.9629645936), (4, -16.3172132825))
            ThreePointArc((4, -16.3172132825), (-2.6457513111, -13.3172132825), (-0.5, -20.2858402491))
        make_face()
        with Locations((0, -16.3172132825)):
            Circle(F0_R_2, mode=Mode.SUBTRACT)
        with BuildLine():
            ThreePointArc((-0.5, -21.6442255579), (0, -21.65), (0.5, -21.6442255579))
            Line((0.5, -21.6442255579), (0.5, -20.2858402491))
            ThreePointArc((0.5, -20.2858402491), (0, -20.3172132825), (-0.5, -20.2858402491))
            Line((-0.5, -20.2858402491), (-0.5, -21.6442255579))
        make_face()
        with BuildLine():
            ThreePointArc((-4, -23.6643191324), (0, -24), (4, -23.6643191324))
            Line((4, -23.6643191324), (4, -21.2772766114))
            ThreePointArc((4, -21.2772766114), (2.2574682461, -21.5319840497), (0.5, -21.6442255579))
            ThreePointArc((0.5, -21.6442255579), (0, -21.65), (-0.5, -21.6442255579))
            ThreePointArc((-0.5, -21.6442255579), (-2.2574682461, -21.5319840497), (-4, -21.2772766114))
            Line((-4, -21.2772766114), (-4, -23.6643191324))
        make_face()
        with BuildLine():
            ThreePointArc((-9.3, 9.4531184965), (-11.8474999, 13.1800801892), (-16.2451217298, 12.1598246122))
            ThreePointArc((-16.2451217298, 12.1598246122), (-16.5603606436, 11.7704550006), (-16.8244558558, 11.3447344513))
            ThreePointArc((-16.8244558558, 11.3447344513), (-14.2752375549, 5.5738258146), (-9.3, 9.4531184965))
        make_face()
        with Locations((-13.3, 9.4531184965)):
            Circle(F0_R_2, mode=Mode.SUBTRACT)
        with BuildLine():
            Line((-16.2451217298, 12.1598246122), (-17.3523282296, 12.9467835778))
            ThreePointArc((-17.3523282296, 12.9467835778), (-17.6467019836, 12.5425838288), (-17.9316623557, 12.1316934169))
            Line((-17.9316623557, 12.1316934169), (-16.8244558558, 11.3447344513))
            ThreePointArc((-16.8244558558, 11.3447344513), (-16.5603606436, 11.7704550006), (-16.2451217298, 12.1598246122))
        make_face()
        with BuildLine():
            ThreePointArc((17.9316623557, 12.1316934169), (17.6467019836, 12.5425838288), (17.3523282296, 12.9467835778))
            Line((17.3523282296, 12.9467835778), (16.2451217298, 12.1598246122))
            ThreePointArc((16.2451217298, 12.1598246122), (16.5603606436, 11.7704550006), (16.8244558558, 11.3447344513))
            Line((16.8244558558, 11.3447344513), (17.9316623557, 12.1316934169))
        make_face()
    extrude(amount=F3_DEPTH)


solid = f1.part
